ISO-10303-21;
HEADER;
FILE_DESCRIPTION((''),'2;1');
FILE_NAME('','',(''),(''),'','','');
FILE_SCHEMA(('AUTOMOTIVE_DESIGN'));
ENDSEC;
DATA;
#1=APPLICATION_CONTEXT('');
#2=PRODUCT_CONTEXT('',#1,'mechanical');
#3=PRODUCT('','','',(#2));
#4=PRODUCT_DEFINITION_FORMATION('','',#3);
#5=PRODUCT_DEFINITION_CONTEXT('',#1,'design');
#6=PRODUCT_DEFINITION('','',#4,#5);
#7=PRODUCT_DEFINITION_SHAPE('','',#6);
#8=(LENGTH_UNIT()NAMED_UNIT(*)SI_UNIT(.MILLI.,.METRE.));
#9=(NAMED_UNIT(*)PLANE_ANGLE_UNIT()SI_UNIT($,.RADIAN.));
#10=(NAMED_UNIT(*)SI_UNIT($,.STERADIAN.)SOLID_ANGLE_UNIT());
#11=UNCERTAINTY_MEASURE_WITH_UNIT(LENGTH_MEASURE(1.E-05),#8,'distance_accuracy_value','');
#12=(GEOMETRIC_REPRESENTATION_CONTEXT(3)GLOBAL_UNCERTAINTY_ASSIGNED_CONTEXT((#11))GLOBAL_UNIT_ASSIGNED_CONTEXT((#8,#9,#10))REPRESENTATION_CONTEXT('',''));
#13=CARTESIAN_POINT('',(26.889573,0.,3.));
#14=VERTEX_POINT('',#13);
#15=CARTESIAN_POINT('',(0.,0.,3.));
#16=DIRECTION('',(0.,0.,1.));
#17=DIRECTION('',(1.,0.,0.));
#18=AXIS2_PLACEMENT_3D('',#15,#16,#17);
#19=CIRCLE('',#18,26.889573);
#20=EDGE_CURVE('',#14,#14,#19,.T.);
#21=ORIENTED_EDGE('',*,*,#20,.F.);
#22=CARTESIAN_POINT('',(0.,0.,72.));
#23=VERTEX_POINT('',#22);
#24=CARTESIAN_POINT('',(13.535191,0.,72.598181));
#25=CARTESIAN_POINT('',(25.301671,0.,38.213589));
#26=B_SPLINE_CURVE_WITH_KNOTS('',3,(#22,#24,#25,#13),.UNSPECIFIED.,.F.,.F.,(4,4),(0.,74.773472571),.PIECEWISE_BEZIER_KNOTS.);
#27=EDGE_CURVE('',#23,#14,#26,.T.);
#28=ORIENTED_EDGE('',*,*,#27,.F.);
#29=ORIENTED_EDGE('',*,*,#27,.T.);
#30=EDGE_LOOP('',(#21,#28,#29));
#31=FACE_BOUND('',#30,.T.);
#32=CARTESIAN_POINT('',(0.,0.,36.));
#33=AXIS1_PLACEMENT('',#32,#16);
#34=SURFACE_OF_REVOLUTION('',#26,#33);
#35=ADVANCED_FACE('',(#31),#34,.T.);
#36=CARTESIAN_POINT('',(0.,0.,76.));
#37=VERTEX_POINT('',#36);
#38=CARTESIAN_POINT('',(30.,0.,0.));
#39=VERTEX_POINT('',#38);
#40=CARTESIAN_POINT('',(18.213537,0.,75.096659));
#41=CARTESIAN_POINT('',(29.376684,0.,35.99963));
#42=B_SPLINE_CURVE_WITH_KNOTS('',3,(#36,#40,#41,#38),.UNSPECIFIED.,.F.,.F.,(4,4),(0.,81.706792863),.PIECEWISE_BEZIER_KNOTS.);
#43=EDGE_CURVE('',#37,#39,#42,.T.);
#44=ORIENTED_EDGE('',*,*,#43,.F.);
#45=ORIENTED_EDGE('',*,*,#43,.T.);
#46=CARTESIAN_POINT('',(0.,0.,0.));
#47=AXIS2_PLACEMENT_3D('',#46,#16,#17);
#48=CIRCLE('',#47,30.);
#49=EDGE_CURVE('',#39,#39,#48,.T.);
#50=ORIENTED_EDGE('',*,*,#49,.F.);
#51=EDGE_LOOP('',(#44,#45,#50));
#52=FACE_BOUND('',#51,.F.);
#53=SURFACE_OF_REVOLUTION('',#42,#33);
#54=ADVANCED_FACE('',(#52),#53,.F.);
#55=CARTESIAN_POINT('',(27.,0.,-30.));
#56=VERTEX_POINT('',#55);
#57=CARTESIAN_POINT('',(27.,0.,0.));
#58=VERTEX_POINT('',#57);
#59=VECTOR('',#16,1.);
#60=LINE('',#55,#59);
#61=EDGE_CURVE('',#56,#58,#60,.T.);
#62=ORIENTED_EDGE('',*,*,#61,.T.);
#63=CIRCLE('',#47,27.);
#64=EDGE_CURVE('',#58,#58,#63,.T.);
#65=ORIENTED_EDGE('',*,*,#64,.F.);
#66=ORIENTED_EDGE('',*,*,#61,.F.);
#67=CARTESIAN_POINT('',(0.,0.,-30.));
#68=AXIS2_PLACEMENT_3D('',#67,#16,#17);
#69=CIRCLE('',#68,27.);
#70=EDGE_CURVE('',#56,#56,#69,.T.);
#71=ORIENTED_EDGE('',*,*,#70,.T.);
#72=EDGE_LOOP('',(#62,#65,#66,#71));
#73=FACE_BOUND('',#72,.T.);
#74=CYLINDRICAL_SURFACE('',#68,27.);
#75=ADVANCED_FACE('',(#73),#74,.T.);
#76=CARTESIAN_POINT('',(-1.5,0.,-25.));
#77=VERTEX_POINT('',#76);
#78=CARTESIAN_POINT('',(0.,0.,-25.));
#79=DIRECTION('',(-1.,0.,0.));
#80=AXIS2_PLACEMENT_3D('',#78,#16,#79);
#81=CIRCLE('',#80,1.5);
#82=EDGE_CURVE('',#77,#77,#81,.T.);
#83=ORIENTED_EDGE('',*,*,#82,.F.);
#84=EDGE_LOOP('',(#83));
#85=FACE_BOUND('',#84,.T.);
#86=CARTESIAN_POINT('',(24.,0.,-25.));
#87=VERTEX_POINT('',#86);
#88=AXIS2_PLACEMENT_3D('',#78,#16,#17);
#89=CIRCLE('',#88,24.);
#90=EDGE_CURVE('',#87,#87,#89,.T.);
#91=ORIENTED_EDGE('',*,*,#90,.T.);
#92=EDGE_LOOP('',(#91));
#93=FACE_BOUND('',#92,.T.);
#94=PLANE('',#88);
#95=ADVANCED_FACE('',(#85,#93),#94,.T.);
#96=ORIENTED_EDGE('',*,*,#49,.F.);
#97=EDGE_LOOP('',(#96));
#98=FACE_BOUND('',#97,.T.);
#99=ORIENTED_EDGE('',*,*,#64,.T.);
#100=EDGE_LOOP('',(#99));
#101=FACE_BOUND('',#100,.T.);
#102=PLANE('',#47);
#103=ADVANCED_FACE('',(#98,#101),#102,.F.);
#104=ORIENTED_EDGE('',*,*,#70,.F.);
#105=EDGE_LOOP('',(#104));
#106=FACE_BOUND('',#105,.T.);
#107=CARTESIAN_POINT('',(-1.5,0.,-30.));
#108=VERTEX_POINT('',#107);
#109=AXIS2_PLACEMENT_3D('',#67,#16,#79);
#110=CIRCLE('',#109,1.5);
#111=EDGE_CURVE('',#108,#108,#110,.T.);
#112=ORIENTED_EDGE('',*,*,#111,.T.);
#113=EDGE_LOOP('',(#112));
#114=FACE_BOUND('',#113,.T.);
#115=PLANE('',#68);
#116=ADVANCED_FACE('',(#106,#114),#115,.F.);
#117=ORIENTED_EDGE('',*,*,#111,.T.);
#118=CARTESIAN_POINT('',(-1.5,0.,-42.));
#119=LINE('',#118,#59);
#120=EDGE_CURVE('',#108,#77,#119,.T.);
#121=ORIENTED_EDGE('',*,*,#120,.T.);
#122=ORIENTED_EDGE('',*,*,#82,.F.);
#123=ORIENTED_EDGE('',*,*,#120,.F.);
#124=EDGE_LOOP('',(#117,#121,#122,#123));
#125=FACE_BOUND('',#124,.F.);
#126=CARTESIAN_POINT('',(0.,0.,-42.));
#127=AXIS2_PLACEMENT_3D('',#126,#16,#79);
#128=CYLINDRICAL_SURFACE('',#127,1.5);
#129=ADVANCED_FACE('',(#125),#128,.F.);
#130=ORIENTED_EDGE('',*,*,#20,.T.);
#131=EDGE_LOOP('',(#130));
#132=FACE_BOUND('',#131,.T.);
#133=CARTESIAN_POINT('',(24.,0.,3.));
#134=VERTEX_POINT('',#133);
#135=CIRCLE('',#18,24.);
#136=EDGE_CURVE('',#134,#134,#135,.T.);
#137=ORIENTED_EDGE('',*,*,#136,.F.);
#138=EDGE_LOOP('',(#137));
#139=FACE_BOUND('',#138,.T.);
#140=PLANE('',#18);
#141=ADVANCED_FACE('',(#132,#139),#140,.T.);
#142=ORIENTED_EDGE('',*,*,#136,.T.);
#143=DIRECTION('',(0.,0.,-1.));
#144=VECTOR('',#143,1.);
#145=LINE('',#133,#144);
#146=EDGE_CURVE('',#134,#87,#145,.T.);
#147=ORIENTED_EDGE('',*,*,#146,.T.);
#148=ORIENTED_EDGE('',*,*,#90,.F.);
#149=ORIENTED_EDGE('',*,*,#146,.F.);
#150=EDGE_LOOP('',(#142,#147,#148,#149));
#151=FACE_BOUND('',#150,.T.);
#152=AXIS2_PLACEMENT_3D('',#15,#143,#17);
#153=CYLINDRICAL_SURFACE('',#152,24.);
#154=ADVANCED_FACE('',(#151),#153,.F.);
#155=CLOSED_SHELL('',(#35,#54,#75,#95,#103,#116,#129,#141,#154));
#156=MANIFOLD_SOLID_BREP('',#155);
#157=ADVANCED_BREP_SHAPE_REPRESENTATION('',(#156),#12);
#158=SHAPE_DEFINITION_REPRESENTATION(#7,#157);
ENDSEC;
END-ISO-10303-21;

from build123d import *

# Parameters (mm, degrees)
F4_D     = 3
F4_DEPTH = 12
F4_TIP   = 0.9012909285


with BuildPart() as f1:
    # F0 (on Front) → F1 (revolve)
    with BuildSketch(Plane.XZ):
        with BuildLine():
            add(Edge.make_bspline(
                [(26.8895727958, 3), (26.9346478476, 2.0004075938), (26.9715210375, 1.0001471851), (27, 0)],
                knots=[74.7734725715, 74.7734725715, 74.7734725715, 74.7734725715, 76.8960337079, 76.8960337079, 76.8960337079, 76.8960337079], degree=3))
            Line((27, 0), (30, 0))
            add(Edge.make_bspline(
                [(0, 76), (18.2135365903, 75.0966593623), (29.3766844422, 35.9996296465), (30, 0)],
                knots=[0, 0, 0, 0, 81.7067928633, 81.7067928633, 81.7067928633, 81.7067928633], degree=3))
            Line((0, 76), (0, 72))
            add(Edge.make_bspline(
                [(0, 72), (13.535191017, 72.5981812348), (25.3016712319, 38.2135889442), (26.8895727958, 3)],
                knots=[0, 0, 0, 0, 74.7734725715, 74.7734725715, 74.7734725715, 74.7734725715], degree=3))
        make_face()
        with BuildLine():
            Line((27, -30), (27, 0))
            add(Edge.make_bspline(
                [(26.8895727958, 3), (26.9346478476, 2.0004075938), (26.9715210375, 1.0001471851), (27, 0)],
                knots=[74.7734725715, 74.7734725715, 74.7734725715, 74.7734725715, 76.8960337079, 76.8960337079, 76.8960337079, 76.8960337079], degree=3))
            Line((26.8895727958, 3), (24, 3))
            Line((24, 3), (24, 0))
            Line((24, 0), (24, -25))
            Line((24, -25), (0, -25))
            Line((0, -25), (0, -30))
            Line((0, -30), (27, -30))
        make_face()
    revolve(axis=Axis((0, 0, 36), (0, 0, 1)))

    # F4
    with Locations(Plane(origin=(0, 0, -30), x_dir=(1, 0, 0), z_dir=(0, 0, -1))):
        with Locations((0, 0)):
            Hole(F4_D / 2, depth=F4_DEPTH)
            with Locations((0, 0, -(F4_DEPTH + F4_TIP / 2))):  # 118° drill point
                Cone(0, F4_D / 2, F4_TIP, mode=Mode.SUBTRACT)


solid = f1.part
